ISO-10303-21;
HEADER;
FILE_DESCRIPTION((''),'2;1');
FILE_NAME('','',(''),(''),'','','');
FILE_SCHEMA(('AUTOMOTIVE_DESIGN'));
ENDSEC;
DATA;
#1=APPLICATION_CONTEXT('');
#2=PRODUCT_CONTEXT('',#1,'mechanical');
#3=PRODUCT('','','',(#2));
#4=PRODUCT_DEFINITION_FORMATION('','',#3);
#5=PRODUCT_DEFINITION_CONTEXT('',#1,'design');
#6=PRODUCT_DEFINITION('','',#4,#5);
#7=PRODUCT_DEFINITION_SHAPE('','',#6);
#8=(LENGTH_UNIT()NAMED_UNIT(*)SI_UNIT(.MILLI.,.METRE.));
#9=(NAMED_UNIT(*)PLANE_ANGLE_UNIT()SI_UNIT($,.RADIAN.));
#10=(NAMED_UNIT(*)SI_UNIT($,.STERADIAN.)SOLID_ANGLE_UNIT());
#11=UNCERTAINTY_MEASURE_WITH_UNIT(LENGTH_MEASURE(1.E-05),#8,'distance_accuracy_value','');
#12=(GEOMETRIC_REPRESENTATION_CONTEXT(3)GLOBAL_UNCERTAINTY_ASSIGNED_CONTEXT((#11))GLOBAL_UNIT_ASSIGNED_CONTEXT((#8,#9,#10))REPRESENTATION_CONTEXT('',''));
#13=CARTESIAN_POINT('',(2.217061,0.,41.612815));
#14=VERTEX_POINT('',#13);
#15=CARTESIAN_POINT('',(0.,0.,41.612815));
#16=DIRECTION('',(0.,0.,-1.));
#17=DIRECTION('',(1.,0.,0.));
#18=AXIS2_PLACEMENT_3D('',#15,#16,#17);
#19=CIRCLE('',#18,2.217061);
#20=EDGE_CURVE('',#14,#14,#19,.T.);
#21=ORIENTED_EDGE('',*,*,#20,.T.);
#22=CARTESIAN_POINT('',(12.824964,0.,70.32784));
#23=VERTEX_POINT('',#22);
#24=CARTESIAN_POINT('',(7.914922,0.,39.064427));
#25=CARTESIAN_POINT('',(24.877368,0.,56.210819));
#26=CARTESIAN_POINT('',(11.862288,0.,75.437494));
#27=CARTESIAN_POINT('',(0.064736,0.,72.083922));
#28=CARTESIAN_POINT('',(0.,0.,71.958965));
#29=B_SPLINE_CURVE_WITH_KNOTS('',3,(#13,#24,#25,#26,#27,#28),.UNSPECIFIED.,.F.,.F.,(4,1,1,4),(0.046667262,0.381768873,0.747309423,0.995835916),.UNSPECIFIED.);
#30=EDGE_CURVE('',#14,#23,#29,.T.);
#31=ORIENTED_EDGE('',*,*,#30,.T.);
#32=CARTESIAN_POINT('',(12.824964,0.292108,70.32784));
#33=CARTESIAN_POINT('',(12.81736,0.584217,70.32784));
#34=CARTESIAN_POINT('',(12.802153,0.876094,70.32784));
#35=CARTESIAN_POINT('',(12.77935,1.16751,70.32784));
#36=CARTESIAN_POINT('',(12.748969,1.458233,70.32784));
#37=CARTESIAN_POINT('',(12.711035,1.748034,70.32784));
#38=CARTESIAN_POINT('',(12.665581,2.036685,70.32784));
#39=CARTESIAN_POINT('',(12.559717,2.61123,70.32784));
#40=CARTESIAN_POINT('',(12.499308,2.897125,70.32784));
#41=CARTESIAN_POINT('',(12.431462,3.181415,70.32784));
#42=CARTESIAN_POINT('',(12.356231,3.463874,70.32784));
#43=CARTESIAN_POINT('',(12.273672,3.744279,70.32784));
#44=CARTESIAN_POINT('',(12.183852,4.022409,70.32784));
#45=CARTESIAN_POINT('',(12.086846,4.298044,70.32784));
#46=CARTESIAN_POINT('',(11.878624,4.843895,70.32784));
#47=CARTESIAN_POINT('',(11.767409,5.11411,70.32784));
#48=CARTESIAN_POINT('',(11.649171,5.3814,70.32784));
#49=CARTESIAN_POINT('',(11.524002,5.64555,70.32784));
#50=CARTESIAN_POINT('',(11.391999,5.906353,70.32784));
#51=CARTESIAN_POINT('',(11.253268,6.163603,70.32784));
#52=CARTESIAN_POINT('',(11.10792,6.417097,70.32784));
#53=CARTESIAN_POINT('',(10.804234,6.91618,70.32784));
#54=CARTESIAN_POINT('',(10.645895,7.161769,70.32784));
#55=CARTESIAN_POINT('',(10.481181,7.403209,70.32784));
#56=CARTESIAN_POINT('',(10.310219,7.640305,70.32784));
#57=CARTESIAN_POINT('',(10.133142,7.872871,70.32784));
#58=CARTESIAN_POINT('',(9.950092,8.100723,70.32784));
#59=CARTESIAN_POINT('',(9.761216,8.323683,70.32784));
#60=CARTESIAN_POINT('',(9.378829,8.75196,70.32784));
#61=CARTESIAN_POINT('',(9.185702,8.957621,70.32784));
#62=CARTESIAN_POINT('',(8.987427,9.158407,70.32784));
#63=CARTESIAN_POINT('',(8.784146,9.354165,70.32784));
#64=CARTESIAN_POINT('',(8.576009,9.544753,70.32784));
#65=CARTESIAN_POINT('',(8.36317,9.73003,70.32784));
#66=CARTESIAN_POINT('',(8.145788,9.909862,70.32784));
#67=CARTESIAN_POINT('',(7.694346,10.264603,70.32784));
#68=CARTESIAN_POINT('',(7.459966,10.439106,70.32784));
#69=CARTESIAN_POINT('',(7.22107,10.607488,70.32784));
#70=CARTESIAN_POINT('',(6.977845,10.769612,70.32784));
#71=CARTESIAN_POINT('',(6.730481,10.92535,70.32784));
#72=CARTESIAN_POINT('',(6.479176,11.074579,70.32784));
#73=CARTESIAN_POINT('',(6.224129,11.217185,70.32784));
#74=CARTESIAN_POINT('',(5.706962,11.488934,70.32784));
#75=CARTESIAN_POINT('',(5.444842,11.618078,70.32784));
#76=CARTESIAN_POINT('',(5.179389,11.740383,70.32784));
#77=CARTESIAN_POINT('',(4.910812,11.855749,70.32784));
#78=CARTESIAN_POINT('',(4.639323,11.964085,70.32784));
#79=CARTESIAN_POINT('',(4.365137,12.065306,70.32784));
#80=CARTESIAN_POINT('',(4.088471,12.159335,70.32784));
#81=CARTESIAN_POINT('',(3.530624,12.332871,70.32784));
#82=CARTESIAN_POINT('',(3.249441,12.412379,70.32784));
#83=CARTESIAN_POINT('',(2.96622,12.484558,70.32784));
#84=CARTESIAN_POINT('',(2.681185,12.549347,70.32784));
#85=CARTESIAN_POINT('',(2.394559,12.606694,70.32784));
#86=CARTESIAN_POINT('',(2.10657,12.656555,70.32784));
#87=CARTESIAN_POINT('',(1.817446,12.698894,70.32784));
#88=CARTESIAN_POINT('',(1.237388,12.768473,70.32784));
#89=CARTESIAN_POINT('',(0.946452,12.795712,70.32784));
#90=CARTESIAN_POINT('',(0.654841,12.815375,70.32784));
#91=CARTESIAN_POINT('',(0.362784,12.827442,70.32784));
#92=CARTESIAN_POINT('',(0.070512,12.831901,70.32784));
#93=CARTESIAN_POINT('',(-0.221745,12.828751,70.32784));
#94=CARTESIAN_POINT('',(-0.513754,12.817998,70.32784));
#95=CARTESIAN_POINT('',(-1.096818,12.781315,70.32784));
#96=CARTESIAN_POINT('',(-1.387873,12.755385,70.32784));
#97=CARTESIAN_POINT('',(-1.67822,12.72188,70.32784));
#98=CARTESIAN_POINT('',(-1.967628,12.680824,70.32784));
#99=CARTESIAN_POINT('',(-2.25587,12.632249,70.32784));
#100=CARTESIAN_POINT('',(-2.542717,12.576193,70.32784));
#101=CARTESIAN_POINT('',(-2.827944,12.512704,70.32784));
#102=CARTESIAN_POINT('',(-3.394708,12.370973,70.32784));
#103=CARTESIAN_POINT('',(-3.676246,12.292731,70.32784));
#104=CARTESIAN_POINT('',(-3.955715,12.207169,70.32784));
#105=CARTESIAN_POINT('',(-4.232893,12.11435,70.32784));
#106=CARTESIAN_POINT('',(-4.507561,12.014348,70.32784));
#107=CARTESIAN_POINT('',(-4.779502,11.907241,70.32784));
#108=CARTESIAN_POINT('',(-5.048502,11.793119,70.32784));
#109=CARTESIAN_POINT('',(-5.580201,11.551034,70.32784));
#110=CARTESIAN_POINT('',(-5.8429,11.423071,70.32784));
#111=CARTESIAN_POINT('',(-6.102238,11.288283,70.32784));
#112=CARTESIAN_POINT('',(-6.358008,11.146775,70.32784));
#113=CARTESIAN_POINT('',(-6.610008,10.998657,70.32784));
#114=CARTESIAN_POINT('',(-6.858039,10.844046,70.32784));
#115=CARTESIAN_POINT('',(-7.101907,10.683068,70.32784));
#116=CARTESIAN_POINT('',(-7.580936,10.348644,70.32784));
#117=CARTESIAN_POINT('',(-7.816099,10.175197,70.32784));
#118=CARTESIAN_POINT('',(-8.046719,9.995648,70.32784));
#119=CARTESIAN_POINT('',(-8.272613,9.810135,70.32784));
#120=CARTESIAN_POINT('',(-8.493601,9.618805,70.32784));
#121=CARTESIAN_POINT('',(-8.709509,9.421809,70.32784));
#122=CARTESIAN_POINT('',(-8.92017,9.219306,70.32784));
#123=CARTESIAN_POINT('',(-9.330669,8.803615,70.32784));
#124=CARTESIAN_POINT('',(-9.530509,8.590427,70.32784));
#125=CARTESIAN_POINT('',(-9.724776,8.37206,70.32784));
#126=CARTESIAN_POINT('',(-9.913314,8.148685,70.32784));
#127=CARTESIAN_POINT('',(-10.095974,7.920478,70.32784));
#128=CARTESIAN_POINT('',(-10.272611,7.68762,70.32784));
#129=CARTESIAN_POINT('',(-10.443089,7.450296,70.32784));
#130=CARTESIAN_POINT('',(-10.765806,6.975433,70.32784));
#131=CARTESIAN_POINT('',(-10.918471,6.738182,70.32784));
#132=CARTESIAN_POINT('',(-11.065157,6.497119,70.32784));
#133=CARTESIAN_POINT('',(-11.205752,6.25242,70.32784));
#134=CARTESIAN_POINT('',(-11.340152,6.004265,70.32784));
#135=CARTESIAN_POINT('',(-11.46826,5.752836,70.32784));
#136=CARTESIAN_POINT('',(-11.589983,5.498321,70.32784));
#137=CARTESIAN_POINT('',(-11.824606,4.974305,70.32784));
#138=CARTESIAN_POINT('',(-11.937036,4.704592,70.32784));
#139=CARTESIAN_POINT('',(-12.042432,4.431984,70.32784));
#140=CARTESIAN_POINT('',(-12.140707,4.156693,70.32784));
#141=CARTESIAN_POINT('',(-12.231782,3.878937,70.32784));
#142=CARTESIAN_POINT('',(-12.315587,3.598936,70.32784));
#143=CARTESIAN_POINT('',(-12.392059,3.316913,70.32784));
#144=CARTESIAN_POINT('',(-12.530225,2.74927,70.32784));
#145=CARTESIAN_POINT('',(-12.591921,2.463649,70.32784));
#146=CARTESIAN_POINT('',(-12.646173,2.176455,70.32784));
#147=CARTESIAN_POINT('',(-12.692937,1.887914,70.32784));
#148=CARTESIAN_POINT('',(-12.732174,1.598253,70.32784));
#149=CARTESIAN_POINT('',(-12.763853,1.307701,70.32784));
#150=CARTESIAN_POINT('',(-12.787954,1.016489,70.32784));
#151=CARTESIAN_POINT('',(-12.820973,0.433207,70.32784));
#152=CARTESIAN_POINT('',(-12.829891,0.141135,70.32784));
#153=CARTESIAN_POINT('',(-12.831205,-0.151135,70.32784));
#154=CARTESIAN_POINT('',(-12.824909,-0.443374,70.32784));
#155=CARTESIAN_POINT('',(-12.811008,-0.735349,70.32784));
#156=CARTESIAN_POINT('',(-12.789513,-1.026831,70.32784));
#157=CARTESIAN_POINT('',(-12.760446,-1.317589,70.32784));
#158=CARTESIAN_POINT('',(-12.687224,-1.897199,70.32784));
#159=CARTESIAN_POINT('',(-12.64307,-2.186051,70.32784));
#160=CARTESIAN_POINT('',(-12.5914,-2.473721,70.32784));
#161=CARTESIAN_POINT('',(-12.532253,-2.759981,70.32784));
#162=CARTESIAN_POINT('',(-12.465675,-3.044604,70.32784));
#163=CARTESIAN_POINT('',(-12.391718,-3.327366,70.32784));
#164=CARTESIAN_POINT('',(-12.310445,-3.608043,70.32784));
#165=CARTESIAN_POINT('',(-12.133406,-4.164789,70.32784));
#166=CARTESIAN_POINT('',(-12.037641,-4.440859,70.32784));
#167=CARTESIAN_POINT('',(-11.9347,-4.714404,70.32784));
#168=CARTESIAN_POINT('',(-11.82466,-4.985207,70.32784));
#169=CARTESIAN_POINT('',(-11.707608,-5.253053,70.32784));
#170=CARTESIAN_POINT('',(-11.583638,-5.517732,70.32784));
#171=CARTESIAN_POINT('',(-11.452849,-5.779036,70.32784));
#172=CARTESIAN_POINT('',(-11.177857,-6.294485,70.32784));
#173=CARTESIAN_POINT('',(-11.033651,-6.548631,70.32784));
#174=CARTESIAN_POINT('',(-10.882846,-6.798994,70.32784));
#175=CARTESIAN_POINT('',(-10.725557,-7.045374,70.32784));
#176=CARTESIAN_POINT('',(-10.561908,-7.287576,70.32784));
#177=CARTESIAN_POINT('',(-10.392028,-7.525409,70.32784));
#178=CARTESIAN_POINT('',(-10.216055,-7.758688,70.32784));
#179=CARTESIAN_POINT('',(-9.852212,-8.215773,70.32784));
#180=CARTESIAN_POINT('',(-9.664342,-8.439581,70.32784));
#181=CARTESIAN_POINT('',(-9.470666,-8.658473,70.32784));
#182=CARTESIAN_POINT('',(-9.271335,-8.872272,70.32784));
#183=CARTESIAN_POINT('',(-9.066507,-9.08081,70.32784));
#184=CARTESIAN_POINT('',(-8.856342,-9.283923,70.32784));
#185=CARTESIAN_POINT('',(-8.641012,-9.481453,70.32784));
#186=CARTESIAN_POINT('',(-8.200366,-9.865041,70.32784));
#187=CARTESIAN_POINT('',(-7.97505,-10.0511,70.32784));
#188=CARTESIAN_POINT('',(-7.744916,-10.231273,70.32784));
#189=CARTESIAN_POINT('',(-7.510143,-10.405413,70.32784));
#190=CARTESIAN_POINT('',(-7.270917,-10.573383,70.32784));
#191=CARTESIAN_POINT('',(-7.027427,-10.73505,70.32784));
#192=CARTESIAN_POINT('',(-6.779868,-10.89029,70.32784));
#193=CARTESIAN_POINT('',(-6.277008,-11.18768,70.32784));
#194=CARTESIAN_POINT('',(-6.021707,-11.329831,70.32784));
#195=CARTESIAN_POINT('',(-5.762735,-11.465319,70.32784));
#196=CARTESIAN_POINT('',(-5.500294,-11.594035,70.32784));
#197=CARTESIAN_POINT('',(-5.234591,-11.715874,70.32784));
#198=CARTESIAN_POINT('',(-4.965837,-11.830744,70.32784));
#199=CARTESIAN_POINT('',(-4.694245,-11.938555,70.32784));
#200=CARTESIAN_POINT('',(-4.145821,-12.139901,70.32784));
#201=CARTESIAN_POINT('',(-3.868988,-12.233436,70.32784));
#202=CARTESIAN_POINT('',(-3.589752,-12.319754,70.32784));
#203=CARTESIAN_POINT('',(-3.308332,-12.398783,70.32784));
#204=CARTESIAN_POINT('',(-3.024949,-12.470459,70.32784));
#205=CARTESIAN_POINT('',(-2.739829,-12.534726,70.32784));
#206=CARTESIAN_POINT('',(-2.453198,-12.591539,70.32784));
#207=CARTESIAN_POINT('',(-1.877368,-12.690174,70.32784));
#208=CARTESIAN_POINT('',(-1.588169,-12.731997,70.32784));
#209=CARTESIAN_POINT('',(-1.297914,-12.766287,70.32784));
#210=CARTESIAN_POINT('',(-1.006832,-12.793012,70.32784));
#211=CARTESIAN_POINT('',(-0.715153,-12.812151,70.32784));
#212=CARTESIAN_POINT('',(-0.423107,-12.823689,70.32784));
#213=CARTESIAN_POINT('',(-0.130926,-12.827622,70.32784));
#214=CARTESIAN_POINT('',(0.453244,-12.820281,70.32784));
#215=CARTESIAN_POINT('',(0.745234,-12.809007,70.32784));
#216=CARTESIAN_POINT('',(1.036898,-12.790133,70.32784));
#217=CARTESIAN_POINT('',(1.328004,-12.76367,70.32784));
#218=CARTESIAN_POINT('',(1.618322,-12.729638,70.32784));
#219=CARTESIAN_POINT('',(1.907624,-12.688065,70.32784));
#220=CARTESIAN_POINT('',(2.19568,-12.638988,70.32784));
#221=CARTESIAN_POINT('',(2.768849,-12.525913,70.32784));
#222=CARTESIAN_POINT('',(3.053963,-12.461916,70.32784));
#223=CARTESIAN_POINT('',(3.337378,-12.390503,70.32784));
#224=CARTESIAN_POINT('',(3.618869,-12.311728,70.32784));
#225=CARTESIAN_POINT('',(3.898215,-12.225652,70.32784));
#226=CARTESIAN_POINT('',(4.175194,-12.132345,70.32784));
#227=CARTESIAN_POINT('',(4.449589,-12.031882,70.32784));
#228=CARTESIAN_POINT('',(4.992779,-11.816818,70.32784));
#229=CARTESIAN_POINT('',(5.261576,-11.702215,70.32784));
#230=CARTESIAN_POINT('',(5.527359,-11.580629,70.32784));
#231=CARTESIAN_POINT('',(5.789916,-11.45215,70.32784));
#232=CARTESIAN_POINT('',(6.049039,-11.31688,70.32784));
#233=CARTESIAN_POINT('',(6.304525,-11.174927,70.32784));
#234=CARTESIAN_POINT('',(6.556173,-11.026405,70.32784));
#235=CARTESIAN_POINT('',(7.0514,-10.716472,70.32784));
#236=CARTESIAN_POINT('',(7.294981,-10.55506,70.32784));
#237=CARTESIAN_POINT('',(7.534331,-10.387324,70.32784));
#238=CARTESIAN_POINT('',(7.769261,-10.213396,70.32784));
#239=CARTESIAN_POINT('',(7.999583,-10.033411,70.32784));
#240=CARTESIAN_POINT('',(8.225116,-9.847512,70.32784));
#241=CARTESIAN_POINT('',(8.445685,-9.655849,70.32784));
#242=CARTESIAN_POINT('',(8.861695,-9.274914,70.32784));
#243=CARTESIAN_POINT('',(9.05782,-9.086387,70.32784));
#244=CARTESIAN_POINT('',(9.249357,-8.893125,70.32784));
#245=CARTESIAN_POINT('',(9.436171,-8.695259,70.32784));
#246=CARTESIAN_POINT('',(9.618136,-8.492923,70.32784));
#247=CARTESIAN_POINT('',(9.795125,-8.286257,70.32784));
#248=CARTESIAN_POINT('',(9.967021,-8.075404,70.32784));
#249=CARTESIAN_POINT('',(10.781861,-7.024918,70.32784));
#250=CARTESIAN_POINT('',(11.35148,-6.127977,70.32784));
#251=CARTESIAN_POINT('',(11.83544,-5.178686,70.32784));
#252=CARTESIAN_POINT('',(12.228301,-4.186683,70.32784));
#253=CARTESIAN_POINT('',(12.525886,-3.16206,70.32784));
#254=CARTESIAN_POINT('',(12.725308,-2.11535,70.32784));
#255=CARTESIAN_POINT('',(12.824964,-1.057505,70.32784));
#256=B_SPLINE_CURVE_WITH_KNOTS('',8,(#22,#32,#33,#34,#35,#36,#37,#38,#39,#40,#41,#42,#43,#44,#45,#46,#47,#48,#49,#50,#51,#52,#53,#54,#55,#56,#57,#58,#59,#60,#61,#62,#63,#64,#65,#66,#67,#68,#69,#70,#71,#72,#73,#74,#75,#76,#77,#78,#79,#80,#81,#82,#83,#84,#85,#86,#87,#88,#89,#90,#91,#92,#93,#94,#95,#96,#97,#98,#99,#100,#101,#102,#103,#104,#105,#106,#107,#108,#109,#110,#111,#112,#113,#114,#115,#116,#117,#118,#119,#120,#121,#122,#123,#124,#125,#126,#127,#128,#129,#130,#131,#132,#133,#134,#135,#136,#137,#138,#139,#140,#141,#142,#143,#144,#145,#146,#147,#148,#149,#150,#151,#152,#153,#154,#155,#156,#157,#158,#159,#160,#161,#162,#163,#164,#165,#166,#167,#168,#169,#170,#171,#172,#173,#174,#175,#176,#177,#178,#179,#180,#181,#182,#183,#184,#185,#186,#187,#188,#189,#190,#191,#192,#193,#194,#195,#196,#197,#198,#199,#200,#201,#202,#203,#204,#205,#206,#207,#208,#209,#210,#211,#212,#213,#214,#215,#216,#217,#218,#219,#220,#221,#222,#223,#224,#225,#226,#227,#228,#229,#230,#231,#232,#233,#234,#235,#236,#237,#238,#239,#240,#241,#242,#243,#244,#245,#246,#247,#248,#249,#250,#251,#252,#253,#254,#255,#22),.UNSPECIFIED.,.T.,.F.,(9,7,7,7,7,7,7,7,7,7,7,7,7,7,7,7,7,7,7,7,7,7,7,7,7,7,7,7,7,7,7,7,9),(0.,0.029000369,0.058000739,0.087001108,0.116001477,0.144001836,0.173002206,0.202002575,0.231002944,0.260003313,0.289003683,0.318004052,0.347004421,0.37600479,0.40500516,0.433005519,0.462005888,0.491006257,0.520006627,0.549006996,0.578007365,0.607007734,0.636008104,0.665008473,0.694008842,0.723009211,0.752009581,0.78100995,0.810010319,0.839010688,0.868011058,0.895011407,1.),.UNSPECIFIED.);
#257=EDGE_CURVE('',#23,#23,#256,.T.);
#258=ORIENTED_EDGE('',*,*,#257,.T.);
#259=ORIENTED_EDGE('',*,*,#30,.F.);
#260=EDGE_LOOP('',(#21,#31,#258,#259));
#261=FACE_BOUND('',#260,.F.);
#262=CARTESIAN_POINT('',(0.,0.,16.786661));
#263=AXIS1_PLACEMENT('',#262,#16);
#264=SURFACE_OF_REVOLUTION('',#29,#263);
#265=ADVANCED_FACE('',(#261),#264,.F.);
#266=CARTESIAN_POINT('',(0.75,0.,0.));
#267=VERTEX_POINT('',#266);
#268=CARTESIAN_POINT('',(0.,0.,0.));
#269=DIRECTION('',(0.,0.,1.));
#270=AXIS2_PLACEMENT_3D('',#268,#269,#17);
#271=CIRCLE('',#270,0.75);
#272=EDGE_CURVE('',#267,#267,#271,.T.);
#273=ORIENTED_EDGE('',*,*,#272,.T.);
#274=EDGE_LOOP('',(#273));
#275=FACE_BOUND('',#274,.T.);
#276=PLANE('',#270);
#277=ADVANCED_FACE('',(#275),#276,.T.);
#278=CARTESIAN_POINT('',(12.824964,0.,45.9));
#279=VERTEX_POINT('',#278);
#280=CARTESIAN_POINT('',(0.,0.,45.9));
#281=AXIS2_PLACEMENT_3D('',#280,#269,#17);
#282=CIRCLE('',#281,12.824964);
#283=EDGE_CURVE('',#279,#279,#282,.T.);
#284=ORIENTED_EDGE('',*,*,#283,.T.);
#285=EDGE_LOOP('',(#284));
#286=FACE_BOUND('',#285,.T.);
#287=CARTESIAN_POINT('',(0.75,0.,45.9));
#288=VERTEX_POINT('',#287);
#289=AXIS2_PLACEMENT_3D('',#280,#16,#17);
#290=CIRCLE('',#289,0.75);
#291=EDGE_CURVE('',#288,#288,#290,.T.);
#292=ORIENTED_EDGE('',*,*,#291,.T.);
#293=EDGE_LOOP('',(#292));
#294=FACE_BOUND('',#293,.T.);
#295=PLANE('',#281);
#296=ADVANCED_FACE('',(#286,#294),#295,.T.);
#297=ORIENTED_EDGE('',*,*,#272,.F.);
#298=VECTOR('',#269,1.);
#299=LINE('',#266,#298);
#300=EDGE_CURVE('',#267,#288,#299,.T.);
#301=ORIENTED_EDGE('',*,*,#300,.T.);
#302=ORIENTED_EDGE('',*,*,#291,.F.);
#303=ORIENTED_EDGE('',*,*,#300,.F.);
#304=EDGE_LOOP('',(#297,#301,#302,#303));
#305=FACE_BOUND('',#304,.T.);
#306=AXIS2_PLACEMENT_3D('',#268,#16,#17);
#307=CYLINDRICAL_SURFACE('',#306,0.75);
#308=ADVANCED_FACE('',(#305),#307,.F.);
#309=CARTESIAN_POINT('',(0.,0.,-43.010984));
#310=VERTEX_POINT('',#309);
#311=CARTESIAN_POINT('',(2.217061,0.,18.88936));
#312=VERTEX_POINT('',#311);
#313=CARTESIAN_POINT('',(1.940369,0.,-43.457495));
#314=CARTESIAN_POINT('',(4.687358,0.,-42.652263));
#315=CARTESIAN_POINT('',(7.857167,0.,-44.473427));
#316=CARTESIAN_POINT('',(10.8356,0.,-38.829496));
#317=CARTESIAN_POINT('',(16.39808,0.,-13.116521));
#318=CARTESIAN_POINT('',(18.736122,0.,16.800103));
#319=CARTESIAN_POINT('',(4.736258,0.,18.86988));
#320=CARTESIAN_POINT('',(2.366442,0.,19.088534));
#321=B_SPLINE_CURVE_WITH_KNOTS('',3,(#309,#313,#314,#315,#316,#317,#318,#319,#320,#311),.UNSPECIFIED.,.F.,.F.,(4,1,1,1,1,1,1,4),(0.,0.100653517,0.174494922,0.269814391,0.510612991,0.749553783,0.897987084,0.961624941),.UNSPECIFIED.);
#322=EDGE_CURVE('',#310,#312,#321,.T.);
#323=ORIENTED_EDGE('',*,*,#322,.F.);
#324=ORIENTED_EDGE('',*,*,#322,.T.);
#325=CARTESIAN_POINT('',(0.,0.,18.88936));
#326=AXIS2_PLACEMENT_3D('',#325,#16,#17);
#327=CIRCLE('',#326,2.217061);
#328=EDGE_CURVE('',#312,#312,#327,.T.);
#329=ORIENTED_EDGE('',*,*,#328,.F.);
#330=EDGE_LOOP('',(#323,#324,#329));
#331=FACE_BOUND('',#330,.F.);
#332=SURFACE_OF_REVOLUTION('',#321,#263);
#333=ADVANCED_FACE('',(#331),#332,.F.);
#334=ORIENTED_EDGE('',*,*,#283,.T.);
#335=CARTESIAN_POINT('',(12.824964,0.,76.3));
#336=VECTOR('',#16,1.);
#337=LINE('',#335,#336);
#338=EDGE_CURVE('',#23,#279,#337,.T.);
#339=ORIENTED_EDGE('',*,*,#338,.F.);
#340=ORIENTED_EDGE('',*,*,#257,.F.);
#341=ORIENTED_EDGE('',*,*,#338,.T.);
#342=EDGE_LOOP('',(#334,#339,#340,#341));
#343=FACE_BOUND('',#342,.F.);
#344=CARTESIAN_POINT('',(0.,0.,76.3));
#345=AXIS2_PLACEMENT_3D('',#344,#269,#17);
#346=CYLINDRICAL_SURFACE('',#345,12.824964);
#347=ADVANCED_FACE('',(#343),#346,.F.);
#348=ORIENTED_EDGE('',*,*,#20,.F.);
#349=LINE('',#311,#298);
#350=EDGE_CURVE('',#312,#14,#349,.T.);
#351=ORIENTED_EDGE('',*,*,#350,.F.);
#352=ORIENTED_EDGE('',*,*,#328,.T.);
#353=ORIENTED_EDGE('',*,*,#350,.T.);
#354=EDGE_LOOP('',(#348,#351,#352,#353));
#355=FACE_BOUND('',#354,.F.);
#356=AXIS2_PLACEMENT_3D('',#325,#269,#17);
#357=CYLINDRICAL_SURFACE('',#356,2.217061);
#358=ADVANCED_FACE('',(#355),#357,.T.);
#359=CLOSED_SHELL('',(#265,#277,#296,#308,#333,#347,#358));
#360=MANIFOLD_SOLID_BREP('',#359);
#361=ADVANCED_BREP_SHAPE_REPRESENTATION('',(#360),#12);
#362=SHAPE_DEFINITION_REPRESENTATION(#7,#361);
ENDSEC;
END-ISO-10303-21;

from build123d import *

# Parameters (mm, degrees)
F3_R     = 12.8249637965
F4_DEPTH = 30.4
F5_R     = 0.75
F6_DEPTH = 72


with BuildPart() as f1:
    # F0 (on Front) → F1 (revolve)
    with BuildSketch(Plane.XZ):
        with BuildLine():
            Line((0, 71.9589648982), (0, 71.956420194))
            Line((0, 71.956420194), (0, 43.3337725699))
            add(Edge.make_bspline(
                [(0, 43.3337725699), (0.6768933098, 42.5310779527), (1.4235595832, 41.9677112034), (2.2170609058, 41.6128150429)],
                knots=[0, 0, 0, 0, 0.0466672624, 0.0466672624, 0.0466672624, 0.0466672624], degree=3))
            add(Edge.make_bspline(
                [(2.2170609058, 41.6128150429), (7.914921835, 39.0644273981), (24.8773683832, 56.2108187873), (11.8622883606, 75.4374940312), (0.0647357854, 72.0839224676), (0, 71.9589648982)],
                knots=[0.0466672624, 0.0466672624, 0.0466672624, 0.0466672624, 0.3817688732, 0.747309423, 0.9958359163, 0.9958359163, 0.9958359163, 0.9958359163], degree=3))
        make_face()
        with BuildLine():
            add(Edge.make_bspline(
                [(0, 43.3337725699), (0.6768933098, 42.5310779527), (1.4235595832, 41.9677112034), (2.2170609058, 41.6128150429)],
                knots=[0, 0, 0, 0, 0.0466672624, 0.0466672624, 0.0466672624, 0.0466672624], degree=3))
            Line((0, 43.3337725699), (0, -43.0109836161))
            add(Edge.make_bspline(
                [(0, -43.0109836161), (1.9403692446, -43.4574948657), (4.6873576342, -42.6522625523), (7.8571672052, -44.4734265141), (10.8356003842, -38.8294957891), (16.3980803441, -13.1165207328), (18.7361219996, 16.8001032293), (4.7362580885, 18.8698801439), (2.3664417141, 19.0885338353), (2.2170609058, 18.8893601298)],
                knots=[0, 0, 0, 0, 0.1006535168, 0.1744949217, 0.2698143913, 0.5106129914, 0.7495537831, 0.8979870835, 0.9616249414, 0.9616249414, 0.9616249414, 0.9616249414], degree=3))
            Line((2.2170609058, 18.8893601298), (2.2170609058, 41.6128150429))
        make_face()
    revolve(axis=Axis((0, 0, 16.7866609991), (0, 0, -1)))

    # F3 (on offset) → F4 (cut)
    with BuildSketch(Plane.XY.offset(76.3)):
        Circle(F3_R)
    extrude(amount=-F4_DEPTH, mode=Mode.SUBTRACT)

    # F5 (on Top) → F6 (cut)
    with BuildSketch(Plane.XY):
        Circle(F5_R)
    extrude(amount=F6_DEPTH, mode=Mode.SUBTRACT)


solid = f1.part
